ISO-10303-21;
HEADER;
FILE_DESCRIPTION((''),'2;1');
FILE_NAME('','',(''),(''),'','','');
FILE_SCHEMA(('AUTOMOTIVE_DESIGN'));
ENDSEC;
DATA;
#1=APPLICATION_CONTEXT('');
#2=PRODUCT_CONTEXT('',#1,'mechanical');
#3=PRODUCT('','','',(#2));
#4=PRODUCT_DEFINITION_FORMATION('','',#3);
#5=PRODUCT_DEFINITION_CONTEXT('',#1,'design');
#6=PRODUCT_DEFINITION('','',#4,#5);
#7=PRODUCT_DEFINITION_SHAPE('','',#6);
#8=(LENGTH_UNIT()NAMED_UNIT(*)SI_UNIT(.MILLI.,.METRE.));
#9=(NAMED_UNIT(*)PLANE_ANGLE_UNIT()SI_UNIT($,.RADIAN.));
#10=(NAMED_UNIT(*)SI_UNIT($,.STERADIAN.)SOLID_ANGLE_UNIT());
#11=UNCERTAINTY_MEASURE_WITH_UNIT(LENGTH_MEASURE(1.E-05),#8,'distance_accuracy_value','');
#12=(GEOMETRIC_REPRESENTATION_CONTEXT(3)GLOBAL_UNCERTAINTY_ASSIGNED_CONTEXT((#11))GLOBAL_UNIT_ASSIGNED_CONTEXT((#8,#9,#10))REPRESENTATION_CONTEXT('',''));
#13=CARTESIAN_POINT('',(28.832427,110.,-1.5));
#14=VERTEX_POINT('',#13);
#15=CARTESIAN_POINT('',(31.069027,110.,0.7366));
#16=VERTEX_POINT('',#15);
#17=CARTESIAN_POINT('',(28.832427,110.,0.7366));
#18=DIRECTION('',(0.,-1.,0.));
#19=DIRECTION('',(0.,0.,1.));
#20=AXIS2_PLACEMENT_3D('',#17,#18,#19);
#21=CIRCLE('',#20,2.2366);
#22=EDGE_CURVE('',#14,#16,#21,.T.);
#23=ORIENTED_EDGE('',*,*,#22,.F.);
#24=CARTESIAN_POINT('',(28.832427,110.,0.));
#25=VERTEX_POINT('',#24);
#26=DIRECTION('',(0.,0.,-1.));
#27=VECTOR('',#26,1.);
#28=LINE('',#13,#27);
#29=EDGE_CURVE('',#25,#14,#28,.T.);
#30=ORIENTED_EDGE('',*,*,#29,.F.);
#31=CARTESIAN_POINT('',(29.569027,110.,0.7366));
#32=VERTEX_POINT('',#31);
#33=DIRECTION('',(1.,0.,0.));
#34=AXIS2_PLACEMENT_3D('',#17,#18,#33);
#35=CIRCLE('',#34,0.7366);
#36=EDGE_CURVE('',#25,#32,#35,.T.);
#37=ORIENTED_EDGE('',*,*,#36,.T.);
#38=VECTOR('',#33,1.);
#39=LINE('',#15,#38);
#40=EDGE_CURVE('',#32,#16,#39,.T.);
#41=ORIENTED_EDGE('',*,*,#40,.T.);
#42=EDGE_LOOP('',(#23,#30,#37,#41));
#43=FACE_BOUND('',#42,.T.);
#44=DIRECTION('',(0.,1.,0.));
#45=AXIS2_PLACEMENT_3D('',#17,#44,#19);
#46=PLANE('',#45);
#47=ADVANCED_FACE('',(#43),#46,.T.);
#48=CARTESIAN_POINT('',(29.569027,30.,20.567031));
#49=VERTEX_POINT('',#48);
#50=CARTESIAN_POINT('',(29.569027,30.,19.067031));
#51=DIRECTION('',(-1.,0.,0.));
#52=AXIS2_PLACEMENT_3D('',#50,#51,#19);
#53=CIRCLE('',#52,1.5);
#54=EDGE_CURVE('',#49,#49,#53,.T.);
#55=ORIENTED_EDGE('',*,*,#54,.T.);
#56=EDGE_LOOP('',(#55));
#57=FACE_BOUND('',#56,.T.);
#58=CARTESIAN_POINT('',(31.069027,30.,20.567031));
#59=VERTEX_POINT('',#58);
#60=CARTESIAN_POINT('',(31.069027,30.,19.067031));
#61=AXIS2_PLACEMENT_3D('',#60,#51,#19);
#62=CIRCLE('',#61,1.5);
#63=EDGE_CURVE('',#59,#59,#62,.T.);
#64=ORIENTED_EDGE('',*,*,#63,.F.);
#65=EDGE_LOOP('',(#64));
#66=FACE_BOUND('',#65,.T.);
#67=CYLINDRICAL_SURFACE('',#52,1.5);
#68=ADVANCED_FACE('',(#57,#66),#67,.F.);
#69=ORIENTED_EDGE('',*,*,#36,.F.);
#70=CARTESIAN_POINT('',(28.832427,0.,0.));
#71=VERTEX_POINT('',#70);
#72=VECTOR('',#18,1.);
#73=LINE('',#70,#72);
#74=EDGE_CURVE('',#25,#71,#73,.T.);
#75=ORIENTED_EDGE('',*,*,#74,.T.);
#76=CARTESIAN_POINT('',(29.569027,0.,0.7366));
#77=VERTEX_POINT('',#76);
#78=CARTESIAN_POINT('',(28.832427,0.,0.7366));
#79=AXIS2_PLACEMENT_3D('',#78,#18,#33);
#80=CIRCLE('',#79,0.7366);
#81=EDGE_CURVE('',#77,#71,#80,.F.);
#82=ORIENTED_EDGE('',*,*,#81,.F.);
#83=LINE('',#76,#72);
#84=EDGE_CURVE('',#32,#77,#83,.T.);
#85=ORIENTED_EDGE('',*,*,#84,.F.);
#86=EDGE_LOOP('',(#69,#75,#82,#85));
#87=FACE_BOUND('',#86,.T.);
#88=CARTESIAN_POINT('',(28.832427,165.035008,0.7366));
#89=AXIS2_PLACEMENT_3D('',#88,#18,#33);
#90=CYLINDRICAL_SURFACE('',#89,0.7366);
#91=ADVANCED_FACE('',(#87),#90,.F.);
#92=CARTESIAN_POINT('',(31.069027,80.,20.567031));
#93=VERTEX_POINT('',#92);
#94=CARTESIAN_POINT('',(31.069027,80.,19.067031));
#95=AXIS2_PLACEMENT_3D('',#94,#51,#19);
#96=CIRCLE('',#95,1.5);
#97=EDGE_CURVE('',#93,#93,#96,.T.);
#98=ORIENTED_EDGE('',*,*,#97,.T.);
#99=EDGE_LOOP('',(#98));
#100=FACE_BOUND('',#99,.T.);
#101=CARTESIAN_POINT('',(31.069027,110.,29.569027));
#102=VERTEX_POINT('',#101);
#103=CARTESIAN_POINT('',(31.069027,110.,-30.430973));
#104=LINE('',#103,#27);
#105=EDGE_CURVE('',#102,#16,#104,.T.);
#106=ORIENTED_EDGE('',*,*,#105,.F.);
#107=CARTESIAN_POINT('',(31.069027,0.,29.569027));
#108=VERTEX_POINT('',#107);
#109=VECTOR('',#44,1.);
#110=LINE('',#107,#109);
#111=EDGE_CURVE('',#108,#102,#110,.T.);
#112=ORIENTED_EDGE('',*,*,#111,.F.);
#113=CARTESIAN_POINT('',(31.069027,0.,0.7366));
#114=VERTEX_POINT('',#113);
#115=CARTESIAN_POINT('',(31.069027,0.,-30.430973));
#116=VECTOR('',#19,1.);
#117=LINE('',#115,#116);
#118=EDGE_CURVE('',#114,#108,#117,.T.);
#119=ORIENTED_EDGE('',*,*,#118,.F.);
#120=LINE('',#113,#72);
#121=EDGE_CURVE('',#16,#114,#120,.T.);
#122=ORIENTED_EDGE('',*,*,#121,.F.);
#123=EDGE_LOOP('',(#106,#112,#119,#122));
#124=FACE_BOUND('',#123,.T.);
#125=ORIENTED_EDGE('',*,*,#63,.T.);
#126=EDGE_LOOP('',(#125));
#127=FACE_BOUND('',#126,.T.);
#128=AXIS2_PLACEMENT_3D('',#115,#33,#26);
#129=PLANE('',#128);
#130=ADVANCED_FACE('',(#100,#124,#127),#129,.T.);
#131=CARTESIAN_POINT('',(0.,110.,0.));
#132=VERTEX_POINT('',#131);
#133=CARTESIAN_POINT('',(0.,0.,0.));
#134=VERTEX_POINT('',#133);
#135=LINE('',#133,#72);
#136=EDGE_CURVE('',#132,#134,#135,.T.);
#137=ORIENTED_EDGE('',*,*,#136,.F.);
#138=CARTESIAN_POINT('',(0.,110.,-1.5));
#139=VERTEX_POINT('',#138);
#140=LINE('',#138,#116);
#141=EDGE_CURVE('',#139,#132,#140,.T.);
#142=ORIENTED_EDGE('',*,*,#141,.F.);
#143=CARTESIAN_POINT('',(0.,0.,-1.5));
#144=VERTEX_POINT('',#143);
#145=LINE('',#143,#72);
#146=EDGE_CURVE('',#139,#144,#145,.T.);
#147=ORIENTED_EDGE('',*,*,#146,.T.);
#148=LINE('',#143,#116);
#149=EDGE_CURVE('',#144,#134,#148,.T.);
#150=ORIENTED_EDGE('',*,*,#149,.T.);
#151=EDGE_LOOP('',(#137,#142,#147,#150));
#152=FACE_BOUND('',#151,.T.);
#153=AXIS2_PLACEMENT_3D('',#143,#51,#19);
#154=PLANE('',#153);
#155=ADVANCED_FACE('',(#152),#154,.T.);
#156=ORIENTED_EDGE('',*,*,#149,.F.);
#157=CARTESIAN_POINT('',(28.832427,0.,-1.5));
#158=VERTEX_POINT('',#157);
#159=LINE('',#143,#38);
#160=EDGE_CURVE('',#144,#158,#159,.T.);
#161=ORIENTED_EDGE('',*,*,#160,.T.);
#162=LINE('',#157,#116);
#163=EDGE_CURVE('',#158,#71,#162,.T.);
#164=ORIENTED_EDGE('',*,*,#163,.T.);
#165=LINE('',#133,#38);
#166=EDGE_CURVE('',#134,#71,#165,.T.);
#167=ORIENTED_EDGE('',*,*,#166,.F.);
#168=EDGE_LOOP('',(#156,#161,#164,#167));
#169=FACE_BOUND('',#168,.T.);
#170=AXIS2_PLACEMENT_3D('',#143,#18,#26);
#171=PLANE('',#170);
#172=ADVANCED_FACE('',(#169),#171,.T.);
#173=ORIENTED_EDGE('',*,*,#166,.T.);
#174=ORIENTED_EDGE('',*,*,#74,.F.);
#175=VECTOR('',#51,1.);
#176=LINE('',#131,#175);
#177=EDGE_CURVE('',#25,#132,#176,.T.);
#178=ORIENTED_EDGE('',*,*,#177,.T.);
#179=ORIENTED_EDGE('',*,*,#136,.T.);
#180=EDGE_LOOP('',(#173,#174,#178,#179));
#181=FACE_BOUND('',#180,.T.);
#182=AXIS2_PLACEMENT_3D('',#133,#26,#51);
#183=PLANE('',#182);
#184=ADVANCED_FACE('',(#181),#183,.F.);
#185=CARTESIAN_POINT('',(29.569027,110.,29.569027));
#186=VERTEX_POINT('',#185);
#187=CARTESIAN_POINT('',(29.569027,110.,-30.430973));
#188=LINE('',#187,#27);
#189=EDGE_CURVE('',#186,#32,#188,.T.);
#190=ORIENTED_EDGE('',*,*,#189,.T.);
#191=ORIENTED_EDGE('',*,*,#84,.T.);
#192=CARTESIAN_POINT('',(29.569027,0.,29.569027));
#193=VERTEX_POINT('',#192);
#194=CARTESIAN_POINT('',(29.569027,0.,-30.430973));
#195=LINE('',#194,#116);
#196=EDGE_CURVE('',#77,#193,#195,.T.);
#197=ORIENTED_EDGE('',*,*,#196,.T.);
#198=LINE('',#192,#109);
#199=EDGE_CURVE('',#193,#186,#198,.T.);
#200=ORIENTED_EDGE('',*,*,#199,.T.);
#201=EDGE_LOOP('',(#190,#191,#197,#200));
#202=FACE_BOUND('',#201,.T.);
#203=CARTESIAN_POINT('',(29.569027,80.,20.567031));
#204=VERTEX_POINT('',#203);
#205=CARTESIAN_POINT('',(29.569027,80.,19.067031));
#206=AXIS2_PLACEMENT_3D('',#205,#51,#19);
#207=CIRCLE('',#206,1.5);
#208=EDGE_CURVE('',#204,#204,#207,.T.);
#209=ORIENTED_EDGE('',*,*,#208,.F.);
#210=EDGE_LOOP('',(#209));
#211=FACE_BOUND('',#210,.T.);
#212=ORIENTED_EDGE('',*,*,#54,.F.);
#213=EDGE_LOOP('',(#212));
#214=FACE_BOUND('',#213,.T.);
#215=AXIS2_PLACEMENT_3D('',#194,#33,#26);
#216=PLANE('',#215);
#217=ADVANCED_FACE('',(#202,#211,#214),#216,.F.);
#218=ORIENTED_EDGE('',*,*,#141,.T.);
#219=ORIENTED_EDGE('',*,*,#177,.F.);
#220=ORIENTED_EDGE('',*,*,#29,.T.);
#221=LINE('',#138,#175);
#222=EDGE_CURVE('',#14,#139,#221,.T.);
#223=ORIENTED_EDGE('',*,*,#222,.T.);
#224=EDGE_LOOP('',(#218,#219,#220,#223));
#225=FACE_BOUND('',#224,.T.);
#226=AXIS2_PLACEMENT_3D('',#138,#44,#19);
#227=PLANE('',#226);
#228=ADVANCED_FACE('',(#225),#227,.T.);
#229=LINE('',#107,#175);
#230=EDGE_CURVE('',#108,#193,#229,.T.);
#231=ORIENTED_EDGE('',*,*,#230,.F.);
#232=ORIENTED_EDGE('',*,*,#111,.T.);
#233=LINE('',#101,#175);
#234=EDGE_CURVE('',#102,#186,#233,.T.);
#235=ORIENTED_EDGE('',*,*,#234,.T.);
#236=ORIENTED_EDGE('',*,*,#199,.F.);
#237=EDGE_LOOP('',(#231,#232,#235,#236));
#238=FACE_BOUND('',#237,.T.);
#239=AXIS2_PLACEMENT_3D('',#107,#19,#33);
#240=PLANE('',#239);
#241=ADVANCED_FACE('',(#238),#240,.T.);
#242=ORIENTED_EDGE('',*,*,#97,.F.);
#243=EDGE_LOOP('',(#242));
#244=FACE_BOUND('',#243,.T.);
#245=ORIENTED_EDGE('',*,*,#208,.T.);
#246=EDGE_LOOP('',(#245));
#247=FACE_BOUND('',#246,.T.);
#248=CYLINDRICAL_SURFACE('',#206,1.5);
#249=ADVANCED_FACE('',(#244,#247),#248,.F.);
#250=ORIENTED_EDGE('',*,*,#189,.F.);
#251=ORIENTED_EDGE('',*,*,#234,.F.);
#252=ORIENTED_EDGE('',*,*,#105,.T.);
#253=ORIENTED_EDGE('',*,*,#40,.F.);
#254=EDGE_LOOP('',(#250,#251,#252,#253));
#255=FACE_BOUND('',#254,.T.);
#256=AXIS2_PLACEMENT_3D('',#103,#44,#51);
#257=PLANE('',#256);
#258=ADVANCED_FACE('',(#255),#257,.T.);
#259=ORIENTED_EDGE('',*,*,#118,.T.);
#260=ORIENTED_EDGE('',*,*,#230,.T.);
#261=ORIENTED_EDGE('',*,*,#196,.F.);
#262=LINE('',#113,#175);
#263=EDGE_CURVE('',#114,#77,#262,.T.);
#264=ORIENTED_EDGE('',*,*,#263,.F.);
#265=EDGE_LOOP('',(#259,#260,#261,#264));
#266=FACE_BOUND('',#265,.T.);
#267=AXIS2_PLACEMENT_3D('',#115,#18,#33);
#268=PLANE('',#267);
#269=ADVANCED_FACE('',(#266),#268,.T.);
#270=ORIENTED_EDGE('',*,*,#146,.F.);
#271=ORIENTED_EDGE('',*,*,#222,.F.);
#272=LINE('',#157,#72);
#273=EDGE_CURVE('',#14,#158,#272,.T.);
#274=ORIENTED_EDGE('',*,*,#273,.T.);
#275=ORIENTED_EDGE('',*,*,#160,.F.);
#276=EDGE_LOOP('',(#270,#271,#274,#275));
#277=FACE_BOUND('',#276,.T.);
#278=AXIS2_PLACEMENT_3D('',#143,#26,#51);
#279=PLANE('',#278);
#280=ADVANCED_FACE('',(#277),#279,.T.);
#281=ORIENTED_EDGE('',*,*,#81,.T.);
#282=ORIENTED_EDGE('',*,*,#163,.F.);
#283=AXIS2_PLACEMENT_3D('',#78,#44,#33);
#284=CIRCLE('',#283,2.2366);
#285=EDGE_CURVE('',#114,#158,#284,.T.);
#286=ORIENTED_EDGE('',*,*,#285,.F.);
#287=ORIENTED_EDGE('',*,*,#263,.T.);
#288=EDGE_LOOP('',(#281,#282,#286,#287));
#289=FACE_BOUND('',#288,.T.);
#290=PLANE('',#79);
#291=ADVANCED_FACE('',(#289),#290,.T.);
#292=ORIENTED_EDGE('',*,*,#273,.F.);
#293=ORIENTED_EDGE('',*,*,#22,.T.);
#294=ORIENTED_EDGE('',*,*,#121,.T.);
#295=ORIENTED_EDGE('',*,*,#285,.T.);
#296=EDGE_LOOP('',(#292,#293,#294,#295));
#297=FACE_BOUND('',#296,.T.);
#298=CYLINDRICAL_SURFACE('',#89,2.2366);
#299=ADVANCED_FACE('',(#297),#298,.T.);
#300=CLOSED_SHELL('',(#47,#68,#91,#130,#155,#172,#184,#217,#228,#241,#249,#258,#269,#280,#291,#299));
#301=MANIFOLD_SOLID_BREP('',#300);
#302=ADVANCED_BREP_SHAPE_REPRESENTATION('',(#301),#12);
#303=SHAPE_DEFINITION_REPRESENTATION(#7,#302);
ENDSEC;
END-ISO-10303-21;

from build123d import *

# Parameters (mm, degrees)
SKETCH2_W              = 60
SKETCH2_H              = 110
BASE_FLANGE1_DEPTH     = 1.5
SKETCHED_BEND1_DEPTH   = 110
SKETCHED_BEND1_2_DEPTH = 110
F_3_0MM_DOWEL_HOLE2_D  = 3


# Read off the part's stored shape, not the designer's step: Sketched Bend1
# Sheet-metal steps are written as plain solids
with BuildPart() as part:
    # Sketch2 → Base-Flange1 (new body)
    with BuildSketch(Plane.XY):
        with Locations((30, 55)):
            Rectangle(SKETCH2_W, SKETCH2_H)
    extrude(amount=-BASE_FLANGE1_DEPTH)

    # Sketched Bend1 outline → Sketched Bend1 (cut)
    with BuildSketch(Plane(origin=(0, 0, 0), x_dir=(1, 0, 0), z_dir=(0, 1, 0))):
        with BuildLine():
            ThreePointArc((28.83242709, 1.5), (30.127591172, 1.086838938), (30.944250946, 0))
            Line((30.944250946, 0), (60, 0))
            Line((60, 0), (60, 1.5))
            Line((60, 1.5), (28.83242709, 1.5))
        make_face()
    extrude(amount=SKETCHED_BEND1_DEPTH, mode=Mode.SUBTRACT)

    # Sketched Bend1 2 outline → Sketched Bend1 2 (add)
    with BuildSketch(Plane(origin=(0, 0, 0), x_dir=(1, 0, 0), z_dir=(0, 1, 0))):
        with BuildLine():
            Line((29.56902709, -0.7366), (29.56902709, -29.56902709))
            Line((29.56902709, -29.56902709), (31.06902709, -29.56902709))
            Line((31.06902709, -29.56902709), (31.06902709, -0.7366))
            ThreePointArc((31.06902709, -0.7366), (31.037612433, -0.363053267), (30.944250946, 0))
            Line((30.944250946, 0), (28.83242709, 0))
            ThreePointArc((28.83242709, 0), (29.353281945, -0.215745145), (29.56902709, -0.7366))
        make_face()
    extrude(amount=SKETCHED_BEND1_2_DEPTH)

    # Ø3.0mm Dowel Hole2 (through all)
    with Locations(Plane(origin=(29.56902709, -1.119987894, 38.304969563), x_dir=(0, 0, 1), z_dir=(-1, 0, 0))):
        with Locations((-19.237938753, 81.119987894), (-19.237938753, 31.119987894)):
            Hole(F_3_0MM_DOWEL_HOLE2_D / 2)


solid = part.part
